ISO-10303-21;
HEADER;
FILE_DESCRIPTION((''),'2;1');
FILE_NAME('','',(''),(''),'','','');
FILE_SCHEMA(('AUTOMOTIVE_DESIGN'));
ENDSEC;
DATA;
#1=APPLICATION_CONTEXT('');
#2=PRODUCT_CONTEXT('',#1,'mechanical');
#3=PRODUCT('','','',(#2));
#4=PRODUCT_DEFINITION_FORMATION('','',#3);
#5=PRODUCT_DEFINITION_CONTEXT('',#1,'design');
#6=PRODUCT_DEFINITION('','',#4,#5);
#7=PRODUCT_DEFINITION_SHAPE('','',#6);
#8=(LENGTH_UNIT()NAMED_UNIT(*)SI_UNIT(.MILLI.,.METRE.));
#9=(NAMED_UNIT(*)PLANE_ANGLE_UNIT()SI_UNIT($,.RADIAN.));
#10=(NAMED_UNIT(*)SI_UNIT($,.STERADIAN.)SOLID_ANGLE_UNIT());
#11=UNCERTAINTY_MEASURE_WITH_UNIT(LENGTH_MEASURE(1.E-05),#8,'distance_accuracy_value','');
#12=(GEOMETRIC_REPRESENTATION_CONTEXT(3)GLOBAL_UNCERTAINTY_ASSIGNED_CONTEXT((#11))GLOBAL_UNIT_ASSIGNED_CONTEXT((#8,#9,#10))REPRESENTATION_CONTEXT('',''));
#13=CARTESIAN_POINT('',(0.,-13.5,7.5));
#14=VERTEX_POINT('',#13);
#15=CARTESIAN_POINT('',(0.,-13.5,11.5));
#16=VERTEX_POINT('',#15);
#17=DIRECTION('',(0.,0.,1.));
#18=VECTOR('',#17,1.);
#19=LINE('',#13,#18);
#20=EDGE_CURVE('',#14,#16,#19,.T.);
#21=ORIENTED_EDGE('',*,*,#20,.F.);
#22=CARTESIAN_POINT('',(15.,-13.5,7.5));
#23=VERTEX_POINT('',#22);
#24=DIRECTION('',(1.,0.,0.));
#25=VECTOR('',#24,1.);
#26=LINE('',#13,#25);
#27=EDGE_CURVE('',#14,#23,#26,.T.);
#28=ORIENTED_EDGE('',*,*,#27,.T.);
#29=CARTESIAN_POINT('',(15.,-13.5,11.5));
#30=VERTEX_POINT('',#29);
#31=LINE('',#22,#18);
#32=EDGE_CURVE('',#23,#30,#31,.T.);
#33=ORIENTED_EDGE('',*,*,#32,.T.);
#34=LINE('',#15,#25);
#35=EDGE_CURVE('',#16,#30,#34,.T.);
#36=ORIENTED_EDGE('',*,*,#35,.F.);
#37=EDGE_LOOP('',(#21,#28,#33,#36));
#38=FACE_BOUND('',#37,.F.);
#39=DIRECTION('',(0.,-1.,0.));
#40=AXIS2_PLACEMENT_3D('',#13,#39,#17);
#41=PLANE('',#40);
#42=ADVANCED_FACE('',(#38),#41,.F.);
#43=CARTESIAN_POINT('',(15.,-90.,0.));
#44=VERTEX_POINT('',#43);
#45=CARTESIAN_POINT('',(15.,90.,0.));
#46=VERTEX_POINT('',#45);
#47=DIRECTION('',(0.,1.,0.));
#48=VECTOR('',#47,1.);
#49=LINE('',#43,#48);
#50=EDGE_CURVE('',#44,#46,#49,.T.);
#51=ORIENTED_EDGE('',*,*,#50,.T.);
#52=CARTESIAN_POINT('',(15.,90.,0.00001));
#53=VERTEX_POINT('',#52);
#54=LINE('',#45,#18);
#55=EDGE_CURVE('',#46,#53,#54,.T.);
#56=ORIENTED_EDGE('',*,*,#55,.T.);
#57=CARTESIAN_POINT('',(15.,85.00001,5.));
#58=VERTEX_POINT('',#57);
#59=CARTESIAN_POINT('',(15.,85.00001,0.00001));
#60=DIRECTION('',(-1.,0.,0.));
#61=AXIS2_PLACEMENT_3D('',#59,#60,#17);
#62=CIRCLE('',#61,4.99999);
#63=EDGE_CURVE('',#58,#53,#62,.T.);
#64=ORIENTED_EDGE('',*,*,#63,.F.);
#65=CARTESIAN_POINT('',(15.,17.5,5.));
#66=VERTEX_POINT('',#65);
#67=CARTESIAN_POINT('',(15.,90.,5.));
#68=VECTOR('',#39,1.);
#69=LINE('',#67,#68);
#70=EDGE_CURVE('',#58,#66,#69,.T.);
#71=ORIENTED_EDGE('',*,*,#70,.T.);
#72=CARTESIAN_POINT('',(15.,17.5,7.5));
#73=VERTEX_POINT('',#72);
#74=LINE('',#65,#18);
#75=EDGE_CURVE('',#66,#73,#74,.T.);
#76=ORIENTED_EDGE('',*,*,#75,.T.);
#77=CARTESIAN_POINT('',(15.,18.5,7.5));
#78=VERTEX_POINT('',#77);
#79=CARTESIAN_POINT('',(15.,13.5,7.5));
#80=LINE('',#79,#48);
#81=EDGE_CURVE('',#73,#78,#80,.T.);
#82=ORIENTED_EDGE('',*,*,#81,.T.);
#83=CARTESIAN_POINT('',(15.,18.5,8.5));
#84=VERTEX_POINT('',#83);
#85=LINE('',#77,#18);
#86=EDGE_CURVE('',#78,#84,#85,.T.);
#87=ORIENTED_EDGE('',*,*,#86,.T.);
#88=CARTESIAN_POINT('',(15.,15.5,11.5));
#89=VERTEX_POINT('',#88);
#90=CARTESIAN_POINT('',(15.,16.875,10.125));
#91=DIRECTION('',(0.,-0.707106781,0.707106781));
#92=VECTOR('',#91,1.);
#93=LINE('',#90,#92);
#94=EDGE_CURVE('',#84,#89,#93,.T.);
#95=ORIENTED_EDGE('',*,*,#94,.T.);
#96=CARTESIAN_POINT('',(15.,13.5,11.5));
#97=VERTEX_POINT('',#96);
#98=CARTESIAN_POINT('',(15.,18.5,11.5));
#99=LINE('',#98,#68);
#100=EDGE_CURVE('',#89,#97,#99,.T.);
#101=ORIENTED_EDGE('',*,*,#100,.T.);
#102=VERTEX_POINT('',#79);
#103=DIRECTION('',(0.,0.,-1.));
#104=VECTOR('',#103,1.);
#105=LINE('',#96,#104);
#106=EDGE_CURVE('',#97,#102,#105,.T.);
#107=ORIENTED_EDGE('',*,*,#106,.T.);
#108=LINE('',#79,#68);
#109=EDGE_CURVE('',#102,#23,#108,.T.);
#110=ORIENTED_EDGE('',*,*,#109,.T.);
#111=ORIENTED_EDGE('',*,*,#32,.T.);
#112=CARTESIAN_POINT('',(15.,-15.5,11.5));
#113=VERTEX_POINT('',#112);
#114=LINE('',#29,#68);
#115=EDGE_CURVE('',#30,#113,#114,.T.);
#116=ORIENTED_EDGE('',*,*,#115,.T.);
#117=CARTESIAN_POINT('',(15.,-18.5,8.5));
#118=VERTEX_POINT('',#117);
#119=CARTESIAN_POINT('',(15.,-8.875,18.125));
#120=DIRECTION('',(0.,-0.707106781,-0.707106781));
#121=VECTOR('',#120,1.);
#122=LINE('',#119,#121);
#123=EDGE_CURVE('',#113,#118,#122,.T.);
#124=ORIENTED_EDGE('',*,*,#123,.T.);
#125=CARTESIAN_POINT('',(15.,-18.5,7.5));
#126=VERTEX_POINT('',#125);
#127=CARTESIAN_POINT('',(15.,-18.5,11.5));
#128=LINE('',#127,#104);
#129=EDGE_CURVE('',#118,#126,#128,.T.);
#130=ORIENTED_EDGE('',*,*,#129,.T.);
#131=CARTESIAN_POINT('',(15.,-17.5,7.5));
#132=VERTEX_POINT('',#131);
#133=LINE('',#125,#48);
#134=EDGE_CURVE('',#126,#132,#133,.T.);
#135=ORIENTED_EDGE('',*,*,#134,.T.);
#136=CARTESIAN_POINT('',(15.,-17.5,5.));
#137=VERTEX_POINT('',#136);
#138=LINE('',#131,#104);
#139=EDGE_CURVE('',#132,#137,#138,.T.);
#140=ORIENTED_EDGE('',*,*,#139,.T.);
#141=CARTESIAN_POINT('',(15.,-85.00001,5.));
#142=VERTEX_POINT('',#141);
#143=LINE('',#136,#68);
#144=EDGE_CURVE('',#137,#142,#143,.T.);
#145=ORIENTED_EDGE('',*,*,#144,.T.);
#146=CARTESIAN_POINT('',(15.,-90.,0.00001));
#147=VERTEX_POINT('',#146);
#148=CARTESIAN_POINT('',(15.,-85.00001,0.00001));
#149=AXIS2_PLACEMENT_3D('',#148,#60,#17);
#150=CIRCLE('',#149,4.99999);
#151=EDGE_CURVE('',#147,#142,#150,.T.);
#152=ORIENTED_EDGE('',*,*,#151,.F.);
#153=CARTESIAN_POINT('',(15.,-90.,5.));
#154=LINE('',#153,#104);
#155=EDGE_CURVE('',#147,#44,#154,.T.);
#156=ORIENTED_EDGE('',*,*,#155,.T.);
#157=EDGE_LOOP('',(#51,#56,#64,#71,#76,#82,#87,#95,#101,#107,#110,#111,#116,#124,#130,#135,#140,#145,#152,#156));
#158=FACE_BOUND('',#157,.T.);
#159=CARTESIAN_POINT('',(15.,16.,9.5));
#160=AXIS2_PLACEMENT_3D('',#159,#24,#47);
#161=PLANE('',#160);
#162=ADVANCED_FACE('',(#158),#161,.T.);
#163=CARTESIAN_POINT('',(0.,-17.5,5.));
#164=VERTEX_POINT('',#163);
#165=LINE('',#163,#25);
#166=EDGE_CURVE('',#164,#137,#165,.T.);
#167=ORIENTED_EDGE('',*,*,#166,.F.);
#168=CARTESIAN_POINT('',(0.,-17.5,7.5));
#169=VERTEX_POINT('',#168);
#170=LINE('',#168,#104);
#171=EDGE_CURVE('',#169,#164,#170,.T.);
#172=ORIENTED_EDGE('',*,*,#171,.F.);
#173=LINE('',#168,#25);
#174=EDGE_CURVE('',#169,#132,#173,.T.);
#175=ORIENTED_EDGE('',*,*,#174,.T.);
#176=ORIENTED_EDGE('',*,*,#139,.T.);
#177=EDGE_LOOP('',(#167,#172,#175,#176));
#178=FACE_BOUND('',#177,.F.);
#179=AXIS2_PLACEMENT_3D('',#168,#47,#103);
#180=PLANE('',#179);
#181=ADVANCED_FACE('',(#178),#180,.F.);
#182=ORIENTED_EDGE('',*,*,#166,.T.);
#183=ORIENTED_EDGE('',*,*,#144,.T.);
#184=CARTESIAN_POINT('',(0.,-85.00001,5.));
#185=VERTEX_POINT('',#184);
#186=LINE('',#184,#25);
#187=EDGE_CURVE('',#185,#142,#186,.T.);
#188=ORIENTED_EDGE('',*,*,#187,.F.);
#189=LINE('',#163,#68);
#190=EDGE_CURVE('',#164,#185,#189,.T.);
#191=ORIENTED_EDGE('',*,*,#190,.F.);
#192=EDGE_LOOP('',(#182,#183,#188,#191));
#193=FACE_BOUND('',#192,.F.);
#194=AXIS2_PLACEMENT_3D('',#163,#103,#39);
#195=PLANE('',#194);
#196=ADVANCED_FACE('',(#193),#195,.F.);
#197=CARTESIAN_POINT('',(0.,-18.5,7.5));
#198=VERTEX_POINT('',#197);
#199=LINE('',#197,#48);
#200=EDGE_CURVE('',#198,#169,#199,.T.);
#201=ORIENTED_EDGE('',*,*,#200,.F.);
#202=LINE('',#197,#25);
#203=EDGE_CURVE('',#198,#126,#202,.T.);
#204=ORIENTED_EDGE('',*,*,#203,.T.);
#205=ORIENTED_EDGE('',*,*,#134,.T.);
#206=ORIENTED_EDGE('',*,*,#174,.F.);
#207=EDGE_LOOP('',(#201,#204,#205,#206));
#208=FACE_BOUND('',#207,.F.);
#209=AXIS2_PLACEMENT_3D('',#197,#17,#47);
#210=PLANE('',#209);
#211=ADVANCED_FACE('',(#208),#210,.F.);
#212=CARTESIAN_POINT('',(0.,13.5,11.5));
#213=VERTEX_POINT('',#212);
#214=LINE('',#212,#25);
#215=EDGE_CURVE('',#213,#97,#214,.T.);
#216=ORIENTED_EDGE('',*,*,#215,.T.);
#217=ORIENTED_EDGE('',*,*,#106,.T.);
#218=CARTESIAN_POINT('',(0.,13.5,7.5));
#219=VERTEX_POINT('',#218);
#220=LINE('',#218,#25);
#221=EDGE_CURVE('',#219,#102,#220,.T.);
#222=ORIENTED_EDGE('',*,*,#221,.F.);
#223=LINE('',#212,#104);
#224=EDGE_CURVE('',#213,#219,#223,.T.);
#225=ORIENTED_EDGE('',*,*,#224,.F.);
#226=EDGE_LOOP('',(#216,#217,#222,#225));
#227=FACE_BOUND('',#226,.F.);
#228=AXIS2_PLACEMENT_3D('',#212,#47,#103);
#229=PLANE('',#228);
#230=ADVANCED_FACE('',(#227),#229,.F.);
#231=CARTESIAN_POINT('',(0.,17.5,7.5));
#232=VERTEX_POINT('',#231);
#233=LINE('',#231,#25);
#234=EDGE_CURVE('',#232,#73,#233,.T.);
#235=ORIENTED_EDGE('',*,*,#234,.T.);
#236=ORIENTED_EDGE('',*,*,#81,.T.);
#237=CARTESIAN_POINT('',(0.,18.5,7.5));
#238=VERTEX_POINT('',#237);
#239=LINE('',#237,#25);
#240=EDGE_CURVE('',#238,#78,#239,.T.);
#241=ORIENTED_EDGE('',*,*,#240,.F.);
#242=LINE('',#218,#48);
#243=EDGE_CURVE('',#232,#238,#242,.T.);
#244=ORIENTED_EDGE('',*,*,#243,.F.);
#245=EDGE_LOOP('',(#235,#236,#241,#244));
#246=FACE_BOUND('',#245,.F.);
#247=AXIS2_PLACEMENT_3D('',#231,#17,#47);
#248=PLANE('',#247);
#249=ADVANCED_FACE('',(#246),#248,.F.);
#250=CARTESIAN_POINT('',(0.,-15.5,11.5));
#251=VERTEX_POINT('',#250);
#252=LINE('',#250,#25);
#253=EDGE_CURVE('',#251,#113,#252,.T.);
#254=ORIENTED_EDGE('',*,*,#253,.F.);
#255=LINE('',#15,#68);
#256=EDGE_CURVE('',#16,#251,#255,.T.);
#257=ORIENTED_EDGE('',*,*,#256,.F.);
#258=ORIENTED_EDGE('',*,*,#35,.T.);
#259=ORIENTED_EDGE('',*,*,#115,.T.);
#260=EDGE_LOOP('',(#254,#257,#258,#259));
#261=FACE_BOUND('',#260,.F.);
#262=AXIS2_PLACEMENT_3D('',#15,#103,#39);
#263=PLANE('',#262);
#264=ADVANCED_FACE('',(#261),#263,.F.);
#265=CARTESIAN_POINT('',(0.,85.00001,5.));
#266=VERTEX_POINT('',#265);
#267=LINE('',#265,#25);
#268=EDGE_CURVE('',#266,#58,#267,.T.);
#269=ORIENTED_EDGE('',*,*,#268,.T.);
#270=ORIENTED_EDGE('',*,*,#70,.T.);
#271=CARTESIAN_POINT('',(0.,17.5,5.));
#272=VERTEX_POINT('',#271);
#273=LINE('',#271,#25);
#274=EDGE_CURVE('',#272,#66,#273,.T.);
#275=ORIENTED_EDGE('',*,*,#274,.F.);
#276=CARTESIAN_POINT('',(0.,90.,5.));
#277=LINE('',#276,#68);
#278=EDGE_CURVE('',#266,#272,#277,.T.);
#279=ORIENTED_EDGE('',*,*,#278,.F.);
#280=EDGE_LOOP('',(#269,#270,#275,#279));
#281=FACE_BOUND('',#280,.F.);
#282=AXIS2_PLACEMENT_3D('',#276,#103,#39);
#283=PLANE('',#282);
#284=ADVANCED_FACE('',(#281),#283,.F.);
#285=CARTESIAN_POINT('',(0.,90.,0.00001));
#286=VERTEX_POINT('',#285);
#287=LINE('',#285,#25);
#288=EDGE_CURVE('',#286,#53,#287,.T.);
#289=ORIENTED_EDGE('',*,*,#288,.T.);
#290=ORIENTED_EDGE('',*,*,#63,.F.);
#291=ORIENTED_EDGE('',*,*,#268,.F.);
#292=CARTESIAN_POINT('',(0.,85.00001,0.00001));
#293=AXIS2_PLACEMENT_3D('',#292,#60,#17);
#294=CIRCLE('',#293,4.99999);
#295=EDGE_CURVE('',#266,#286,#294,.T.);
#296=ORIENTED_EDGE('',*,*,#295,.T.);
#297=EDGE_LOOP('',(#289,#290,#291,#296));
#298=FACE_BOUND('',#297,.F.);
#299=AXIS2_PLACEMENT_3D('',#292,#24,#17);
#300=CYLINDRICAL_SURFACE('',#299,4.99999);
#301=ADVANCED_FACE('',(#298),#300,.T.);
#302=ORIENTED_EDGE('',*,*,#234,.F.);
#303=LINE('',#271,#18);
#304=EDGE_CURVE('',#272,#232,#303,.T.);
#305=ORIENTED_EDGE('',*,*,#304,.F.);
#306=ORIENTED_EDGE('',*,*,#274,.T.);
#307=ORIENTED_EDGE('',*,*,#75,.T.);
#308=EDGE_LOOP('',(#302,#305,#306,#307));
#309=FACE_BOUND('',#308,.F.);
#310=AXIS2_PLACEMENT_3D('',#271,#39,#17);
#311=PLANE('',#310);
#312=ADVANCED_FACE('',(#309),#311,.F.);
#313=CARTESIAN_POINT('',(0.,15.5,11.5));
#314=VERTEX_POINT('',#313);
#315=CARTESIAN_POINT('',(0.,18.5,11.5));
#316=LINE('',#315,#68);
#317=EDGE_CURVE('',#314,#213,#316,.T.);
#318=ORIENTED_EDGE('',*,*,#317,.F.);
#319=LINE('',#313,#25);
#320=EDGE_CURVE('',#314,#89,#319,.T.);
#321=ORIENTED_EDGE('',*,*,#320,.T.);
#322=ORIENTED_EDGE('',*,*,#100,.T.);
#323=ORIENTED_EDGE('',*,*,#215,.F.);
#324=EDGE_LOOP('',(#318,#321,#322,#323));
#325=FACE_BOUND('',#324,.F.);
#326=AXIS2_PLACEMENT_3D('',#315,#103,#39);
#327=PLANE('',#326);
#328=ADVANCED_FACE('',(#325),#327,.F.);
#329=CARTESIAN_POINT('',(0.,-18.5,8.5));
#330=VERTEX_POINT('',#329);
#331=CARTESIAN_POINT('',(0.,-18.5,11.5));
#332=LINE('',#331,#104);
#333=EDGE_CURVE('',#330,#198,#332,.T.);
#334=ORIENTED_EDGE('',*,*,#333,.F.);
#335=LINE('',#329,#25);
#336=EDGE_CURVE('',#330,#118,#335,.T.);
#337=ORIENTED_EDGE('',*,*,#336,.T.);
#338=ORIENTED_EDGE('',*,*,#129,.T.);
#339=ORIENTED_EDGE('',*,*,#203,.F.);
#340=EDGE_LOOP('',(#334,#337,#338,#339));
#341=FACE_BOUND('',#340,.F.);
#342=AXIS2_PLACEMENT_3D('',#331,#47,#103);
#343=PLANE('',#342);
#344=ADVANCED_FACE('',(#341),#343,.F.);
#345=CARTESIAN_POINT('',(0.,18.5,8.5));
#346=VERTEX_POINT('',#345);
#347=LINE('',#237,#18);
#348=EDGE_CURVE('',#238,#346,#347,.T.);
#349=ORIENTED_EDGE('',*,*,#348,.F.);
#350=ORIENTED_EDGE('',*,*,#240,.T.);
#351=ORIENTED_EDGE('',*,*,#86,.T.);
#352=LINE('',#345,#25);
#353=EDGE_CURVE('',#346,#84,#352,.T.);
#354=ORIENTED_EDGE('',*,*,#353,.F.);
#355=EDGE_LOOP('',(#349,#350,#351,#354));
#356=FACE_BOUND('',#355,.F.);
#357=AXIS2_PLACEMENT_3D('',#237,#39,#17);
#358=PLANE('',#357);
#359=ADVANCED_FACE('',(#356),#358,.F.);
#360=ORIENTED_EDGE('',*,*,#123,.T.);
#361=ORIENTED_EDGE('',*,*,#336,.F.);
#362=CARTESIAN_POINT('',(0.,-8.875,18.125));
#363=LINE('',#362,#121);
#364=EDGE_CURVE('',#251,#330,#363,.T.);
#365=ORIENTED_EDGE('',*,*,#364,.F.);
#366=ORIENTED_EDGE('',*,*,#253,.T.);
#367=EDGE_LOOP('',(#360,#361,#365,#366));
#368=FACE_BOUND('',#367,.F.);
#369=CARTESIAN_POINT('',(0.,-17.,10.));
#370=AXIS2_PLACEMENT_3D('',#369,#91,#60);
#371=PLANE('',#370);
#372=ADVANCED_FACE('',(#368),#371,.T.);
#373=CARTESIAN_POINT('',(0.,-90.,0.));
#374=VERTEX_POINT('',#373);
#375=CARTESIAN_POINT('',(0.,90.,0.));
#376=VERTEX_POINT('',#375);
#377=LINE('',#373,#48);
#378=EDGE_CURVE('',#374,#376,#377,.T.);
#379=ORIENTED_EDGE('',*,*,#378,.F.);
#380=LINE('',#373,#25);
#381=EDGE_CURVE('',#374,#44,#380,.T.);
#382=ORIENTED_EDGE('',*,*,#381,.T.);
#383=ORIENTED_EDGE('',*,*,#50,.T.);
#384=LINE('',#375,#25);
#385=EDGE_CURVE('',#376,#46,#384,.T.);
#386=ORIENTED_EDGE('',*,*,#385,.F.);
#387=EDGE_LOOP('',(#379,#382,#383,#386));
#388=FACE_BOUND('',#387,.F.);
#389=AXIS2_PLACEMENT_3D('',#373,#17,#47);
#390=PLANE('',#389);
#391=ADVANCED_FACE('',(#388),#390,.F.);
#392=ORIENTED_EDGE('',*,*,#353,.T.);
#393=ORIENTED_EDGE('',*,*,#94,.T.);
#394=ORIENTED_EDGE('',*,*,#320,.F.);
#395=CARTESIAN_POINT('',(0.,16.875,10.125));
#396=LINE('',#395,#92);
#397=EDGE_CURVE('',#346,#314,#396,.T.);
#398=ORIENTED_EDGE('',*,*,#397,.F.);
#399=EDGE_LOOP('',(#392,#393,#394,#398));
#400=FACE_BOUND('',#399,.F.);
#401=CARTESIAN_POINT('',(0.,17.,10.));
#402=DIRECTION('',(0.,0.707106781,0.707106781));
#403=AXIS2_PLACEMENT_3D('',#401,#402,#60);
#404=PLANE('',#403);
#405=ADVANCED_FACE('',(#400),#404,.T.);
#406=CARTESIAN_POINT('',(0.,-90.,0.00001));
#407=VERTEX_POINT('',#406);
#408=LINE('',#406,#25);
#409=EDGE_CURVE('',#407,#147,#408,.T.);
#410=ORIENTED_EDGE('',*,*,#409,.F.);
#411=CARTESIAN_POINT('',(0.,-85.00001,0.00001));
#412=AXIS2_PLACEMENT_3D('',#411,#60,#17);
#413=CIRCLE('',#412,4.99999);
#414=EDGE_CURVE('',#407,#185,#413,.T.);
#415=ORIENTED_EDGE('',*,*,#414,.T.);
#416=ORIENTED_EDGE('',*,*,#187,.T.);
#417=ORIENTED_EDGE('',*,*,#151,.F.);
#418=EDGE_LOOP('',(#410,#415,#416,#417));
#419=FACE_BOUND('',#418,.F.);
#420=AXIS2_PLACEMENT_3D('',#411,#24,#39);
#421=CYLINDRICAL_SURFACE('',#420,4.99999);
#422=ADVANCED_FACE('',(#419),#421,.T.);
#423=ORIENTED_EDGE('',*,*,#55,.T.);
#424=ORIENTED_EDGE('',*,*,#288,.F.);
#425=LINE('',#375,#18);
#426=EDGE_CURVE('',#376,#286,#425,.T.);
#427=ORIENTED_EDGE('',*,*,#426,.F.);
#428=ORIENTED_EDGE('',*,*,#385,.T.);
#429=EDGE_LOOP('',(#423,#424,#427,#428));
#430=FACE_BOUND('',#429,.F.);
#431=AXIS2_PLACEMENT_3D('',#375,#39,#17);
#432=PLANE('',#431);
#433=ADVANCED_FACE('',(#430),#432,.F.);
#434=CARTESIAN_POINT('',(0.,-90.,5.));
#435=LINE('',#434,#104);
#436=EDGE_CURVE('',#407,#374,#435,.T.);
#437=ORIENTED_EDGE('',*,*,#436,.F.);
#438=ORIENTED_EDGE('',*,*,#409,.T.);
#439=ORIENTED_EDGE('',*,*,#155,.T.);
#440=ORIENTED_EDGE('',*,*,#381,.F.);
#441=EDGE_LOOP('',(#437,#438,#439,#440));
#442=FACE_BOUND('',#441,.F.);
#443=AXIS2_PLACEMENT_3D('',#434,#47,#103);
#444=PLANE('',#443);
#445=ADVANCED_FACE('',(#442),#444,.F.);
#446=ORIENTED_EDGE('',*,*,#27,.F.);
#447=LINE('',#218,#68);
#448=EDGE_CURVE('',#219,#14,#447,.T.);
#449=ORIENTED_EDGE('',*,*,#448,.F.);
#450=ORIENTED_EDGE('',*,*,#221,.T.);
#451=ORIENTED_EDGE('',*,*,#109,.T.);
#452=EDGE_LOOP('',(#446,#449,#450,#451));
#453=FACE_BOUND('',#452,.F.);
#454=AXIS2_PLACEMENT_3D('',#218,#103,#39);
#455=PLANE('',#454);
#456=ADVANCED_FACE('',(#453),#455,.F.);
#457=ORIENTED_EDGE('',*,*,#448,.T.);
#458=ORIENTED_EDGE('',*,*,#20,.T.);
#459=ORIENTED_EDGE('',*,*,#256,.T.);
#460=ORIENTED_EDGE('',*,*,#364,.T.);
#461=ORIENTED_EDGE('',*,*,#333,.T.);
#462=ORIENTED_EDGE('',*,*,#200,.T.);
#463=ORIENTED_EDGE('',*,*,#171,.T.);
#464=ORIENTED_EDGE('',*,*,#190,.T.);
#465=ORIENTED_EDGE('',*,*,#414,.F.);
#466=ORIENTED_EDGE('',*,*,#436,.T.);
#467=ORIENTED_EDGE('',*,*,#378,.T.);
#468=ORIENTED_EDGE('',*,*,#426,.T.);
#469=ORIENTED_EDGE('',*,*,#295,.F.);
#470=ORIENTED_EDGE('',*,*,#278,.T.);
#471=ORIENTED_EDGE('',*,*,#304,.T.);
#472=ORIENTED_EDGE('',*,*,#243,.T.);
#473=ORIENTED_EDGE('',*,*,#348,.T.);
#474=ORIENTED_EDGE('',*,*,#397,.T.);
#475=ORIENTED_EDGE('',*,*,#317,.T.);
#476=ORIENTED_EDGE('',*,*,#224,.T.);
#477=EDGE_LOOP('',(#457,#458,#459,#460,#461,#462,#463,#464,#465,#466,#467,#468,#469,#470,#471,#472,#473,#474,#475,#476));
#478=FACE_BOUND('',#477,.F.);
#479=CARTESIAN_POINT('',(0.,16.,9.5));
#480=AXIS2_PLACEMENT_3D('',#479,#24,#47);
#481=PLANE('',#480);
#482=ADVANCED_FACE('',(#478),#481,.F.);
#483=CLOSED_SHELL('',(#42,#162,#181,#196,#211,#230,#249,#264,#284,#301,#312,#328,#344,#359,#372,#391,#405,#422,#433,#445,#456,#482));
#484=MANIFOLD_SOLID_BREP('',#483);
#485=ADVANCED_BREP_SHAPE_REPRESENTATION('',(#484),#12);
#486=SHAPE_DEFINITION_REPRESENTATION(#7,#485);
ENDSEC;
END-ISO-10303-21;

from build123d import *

# Parameters (mm, degrees)
F1_DEPTH = 15
F2_SIZE  = 3
F3_R     = 4.99999


# Not quite as in the source:
# - a fillet or chamfer is up to 0.001 mm smaller than in the source, because OpenCascade refuses the exact size


with BuildPart() as f1:
    # F0 (on Right) → F1 (new body)
    with BuildSketch(Plane.YZ):
        Polygon((13.5, 7.5), (17.5, 7.5), (18.5, 7.5), (18.5, 11.5), (13.5, 11.5), align=None)
        Polygon((-17.5, 5), (17.5, 5), (17.5, 7.5), (13.5, 7.5), (-13.5, 7.5), (-17.5, 7.5), align=None)
        Polygon((90, 0), (90, 5), (17.5, 5), (-17.5, 5), (-90, 5), (-90, 0), align=None)
        Polygon((-18.5, 7.5), (-17.5, 7.5), (-13.5, 7.5), (-13.5, 11.5), (-18.5, 11.5), align=None)
    extrude(amount=F1_DEPTH)

    # F2
    f2_edges = [f1.edges().sort_by_distance(p)[0] for p in [
        (7.5, -18.5, 11.5),
        (7.5, 18.5, 11.5),
    ]]
    chamfer(f2_edges, length=F2_SIZE)

    # F3 (radius 5 in the source; OpenCascade refuses exactly that, so slightly less here)
    f3_edges = [f1.edges().sort_by_distance(p)[0] for p in [
        (7.5, 90, 5),
        (7.5, -90, 5),
    ]]
    fillet(f3_edges, radius=F3_R)


solid = f1.part
